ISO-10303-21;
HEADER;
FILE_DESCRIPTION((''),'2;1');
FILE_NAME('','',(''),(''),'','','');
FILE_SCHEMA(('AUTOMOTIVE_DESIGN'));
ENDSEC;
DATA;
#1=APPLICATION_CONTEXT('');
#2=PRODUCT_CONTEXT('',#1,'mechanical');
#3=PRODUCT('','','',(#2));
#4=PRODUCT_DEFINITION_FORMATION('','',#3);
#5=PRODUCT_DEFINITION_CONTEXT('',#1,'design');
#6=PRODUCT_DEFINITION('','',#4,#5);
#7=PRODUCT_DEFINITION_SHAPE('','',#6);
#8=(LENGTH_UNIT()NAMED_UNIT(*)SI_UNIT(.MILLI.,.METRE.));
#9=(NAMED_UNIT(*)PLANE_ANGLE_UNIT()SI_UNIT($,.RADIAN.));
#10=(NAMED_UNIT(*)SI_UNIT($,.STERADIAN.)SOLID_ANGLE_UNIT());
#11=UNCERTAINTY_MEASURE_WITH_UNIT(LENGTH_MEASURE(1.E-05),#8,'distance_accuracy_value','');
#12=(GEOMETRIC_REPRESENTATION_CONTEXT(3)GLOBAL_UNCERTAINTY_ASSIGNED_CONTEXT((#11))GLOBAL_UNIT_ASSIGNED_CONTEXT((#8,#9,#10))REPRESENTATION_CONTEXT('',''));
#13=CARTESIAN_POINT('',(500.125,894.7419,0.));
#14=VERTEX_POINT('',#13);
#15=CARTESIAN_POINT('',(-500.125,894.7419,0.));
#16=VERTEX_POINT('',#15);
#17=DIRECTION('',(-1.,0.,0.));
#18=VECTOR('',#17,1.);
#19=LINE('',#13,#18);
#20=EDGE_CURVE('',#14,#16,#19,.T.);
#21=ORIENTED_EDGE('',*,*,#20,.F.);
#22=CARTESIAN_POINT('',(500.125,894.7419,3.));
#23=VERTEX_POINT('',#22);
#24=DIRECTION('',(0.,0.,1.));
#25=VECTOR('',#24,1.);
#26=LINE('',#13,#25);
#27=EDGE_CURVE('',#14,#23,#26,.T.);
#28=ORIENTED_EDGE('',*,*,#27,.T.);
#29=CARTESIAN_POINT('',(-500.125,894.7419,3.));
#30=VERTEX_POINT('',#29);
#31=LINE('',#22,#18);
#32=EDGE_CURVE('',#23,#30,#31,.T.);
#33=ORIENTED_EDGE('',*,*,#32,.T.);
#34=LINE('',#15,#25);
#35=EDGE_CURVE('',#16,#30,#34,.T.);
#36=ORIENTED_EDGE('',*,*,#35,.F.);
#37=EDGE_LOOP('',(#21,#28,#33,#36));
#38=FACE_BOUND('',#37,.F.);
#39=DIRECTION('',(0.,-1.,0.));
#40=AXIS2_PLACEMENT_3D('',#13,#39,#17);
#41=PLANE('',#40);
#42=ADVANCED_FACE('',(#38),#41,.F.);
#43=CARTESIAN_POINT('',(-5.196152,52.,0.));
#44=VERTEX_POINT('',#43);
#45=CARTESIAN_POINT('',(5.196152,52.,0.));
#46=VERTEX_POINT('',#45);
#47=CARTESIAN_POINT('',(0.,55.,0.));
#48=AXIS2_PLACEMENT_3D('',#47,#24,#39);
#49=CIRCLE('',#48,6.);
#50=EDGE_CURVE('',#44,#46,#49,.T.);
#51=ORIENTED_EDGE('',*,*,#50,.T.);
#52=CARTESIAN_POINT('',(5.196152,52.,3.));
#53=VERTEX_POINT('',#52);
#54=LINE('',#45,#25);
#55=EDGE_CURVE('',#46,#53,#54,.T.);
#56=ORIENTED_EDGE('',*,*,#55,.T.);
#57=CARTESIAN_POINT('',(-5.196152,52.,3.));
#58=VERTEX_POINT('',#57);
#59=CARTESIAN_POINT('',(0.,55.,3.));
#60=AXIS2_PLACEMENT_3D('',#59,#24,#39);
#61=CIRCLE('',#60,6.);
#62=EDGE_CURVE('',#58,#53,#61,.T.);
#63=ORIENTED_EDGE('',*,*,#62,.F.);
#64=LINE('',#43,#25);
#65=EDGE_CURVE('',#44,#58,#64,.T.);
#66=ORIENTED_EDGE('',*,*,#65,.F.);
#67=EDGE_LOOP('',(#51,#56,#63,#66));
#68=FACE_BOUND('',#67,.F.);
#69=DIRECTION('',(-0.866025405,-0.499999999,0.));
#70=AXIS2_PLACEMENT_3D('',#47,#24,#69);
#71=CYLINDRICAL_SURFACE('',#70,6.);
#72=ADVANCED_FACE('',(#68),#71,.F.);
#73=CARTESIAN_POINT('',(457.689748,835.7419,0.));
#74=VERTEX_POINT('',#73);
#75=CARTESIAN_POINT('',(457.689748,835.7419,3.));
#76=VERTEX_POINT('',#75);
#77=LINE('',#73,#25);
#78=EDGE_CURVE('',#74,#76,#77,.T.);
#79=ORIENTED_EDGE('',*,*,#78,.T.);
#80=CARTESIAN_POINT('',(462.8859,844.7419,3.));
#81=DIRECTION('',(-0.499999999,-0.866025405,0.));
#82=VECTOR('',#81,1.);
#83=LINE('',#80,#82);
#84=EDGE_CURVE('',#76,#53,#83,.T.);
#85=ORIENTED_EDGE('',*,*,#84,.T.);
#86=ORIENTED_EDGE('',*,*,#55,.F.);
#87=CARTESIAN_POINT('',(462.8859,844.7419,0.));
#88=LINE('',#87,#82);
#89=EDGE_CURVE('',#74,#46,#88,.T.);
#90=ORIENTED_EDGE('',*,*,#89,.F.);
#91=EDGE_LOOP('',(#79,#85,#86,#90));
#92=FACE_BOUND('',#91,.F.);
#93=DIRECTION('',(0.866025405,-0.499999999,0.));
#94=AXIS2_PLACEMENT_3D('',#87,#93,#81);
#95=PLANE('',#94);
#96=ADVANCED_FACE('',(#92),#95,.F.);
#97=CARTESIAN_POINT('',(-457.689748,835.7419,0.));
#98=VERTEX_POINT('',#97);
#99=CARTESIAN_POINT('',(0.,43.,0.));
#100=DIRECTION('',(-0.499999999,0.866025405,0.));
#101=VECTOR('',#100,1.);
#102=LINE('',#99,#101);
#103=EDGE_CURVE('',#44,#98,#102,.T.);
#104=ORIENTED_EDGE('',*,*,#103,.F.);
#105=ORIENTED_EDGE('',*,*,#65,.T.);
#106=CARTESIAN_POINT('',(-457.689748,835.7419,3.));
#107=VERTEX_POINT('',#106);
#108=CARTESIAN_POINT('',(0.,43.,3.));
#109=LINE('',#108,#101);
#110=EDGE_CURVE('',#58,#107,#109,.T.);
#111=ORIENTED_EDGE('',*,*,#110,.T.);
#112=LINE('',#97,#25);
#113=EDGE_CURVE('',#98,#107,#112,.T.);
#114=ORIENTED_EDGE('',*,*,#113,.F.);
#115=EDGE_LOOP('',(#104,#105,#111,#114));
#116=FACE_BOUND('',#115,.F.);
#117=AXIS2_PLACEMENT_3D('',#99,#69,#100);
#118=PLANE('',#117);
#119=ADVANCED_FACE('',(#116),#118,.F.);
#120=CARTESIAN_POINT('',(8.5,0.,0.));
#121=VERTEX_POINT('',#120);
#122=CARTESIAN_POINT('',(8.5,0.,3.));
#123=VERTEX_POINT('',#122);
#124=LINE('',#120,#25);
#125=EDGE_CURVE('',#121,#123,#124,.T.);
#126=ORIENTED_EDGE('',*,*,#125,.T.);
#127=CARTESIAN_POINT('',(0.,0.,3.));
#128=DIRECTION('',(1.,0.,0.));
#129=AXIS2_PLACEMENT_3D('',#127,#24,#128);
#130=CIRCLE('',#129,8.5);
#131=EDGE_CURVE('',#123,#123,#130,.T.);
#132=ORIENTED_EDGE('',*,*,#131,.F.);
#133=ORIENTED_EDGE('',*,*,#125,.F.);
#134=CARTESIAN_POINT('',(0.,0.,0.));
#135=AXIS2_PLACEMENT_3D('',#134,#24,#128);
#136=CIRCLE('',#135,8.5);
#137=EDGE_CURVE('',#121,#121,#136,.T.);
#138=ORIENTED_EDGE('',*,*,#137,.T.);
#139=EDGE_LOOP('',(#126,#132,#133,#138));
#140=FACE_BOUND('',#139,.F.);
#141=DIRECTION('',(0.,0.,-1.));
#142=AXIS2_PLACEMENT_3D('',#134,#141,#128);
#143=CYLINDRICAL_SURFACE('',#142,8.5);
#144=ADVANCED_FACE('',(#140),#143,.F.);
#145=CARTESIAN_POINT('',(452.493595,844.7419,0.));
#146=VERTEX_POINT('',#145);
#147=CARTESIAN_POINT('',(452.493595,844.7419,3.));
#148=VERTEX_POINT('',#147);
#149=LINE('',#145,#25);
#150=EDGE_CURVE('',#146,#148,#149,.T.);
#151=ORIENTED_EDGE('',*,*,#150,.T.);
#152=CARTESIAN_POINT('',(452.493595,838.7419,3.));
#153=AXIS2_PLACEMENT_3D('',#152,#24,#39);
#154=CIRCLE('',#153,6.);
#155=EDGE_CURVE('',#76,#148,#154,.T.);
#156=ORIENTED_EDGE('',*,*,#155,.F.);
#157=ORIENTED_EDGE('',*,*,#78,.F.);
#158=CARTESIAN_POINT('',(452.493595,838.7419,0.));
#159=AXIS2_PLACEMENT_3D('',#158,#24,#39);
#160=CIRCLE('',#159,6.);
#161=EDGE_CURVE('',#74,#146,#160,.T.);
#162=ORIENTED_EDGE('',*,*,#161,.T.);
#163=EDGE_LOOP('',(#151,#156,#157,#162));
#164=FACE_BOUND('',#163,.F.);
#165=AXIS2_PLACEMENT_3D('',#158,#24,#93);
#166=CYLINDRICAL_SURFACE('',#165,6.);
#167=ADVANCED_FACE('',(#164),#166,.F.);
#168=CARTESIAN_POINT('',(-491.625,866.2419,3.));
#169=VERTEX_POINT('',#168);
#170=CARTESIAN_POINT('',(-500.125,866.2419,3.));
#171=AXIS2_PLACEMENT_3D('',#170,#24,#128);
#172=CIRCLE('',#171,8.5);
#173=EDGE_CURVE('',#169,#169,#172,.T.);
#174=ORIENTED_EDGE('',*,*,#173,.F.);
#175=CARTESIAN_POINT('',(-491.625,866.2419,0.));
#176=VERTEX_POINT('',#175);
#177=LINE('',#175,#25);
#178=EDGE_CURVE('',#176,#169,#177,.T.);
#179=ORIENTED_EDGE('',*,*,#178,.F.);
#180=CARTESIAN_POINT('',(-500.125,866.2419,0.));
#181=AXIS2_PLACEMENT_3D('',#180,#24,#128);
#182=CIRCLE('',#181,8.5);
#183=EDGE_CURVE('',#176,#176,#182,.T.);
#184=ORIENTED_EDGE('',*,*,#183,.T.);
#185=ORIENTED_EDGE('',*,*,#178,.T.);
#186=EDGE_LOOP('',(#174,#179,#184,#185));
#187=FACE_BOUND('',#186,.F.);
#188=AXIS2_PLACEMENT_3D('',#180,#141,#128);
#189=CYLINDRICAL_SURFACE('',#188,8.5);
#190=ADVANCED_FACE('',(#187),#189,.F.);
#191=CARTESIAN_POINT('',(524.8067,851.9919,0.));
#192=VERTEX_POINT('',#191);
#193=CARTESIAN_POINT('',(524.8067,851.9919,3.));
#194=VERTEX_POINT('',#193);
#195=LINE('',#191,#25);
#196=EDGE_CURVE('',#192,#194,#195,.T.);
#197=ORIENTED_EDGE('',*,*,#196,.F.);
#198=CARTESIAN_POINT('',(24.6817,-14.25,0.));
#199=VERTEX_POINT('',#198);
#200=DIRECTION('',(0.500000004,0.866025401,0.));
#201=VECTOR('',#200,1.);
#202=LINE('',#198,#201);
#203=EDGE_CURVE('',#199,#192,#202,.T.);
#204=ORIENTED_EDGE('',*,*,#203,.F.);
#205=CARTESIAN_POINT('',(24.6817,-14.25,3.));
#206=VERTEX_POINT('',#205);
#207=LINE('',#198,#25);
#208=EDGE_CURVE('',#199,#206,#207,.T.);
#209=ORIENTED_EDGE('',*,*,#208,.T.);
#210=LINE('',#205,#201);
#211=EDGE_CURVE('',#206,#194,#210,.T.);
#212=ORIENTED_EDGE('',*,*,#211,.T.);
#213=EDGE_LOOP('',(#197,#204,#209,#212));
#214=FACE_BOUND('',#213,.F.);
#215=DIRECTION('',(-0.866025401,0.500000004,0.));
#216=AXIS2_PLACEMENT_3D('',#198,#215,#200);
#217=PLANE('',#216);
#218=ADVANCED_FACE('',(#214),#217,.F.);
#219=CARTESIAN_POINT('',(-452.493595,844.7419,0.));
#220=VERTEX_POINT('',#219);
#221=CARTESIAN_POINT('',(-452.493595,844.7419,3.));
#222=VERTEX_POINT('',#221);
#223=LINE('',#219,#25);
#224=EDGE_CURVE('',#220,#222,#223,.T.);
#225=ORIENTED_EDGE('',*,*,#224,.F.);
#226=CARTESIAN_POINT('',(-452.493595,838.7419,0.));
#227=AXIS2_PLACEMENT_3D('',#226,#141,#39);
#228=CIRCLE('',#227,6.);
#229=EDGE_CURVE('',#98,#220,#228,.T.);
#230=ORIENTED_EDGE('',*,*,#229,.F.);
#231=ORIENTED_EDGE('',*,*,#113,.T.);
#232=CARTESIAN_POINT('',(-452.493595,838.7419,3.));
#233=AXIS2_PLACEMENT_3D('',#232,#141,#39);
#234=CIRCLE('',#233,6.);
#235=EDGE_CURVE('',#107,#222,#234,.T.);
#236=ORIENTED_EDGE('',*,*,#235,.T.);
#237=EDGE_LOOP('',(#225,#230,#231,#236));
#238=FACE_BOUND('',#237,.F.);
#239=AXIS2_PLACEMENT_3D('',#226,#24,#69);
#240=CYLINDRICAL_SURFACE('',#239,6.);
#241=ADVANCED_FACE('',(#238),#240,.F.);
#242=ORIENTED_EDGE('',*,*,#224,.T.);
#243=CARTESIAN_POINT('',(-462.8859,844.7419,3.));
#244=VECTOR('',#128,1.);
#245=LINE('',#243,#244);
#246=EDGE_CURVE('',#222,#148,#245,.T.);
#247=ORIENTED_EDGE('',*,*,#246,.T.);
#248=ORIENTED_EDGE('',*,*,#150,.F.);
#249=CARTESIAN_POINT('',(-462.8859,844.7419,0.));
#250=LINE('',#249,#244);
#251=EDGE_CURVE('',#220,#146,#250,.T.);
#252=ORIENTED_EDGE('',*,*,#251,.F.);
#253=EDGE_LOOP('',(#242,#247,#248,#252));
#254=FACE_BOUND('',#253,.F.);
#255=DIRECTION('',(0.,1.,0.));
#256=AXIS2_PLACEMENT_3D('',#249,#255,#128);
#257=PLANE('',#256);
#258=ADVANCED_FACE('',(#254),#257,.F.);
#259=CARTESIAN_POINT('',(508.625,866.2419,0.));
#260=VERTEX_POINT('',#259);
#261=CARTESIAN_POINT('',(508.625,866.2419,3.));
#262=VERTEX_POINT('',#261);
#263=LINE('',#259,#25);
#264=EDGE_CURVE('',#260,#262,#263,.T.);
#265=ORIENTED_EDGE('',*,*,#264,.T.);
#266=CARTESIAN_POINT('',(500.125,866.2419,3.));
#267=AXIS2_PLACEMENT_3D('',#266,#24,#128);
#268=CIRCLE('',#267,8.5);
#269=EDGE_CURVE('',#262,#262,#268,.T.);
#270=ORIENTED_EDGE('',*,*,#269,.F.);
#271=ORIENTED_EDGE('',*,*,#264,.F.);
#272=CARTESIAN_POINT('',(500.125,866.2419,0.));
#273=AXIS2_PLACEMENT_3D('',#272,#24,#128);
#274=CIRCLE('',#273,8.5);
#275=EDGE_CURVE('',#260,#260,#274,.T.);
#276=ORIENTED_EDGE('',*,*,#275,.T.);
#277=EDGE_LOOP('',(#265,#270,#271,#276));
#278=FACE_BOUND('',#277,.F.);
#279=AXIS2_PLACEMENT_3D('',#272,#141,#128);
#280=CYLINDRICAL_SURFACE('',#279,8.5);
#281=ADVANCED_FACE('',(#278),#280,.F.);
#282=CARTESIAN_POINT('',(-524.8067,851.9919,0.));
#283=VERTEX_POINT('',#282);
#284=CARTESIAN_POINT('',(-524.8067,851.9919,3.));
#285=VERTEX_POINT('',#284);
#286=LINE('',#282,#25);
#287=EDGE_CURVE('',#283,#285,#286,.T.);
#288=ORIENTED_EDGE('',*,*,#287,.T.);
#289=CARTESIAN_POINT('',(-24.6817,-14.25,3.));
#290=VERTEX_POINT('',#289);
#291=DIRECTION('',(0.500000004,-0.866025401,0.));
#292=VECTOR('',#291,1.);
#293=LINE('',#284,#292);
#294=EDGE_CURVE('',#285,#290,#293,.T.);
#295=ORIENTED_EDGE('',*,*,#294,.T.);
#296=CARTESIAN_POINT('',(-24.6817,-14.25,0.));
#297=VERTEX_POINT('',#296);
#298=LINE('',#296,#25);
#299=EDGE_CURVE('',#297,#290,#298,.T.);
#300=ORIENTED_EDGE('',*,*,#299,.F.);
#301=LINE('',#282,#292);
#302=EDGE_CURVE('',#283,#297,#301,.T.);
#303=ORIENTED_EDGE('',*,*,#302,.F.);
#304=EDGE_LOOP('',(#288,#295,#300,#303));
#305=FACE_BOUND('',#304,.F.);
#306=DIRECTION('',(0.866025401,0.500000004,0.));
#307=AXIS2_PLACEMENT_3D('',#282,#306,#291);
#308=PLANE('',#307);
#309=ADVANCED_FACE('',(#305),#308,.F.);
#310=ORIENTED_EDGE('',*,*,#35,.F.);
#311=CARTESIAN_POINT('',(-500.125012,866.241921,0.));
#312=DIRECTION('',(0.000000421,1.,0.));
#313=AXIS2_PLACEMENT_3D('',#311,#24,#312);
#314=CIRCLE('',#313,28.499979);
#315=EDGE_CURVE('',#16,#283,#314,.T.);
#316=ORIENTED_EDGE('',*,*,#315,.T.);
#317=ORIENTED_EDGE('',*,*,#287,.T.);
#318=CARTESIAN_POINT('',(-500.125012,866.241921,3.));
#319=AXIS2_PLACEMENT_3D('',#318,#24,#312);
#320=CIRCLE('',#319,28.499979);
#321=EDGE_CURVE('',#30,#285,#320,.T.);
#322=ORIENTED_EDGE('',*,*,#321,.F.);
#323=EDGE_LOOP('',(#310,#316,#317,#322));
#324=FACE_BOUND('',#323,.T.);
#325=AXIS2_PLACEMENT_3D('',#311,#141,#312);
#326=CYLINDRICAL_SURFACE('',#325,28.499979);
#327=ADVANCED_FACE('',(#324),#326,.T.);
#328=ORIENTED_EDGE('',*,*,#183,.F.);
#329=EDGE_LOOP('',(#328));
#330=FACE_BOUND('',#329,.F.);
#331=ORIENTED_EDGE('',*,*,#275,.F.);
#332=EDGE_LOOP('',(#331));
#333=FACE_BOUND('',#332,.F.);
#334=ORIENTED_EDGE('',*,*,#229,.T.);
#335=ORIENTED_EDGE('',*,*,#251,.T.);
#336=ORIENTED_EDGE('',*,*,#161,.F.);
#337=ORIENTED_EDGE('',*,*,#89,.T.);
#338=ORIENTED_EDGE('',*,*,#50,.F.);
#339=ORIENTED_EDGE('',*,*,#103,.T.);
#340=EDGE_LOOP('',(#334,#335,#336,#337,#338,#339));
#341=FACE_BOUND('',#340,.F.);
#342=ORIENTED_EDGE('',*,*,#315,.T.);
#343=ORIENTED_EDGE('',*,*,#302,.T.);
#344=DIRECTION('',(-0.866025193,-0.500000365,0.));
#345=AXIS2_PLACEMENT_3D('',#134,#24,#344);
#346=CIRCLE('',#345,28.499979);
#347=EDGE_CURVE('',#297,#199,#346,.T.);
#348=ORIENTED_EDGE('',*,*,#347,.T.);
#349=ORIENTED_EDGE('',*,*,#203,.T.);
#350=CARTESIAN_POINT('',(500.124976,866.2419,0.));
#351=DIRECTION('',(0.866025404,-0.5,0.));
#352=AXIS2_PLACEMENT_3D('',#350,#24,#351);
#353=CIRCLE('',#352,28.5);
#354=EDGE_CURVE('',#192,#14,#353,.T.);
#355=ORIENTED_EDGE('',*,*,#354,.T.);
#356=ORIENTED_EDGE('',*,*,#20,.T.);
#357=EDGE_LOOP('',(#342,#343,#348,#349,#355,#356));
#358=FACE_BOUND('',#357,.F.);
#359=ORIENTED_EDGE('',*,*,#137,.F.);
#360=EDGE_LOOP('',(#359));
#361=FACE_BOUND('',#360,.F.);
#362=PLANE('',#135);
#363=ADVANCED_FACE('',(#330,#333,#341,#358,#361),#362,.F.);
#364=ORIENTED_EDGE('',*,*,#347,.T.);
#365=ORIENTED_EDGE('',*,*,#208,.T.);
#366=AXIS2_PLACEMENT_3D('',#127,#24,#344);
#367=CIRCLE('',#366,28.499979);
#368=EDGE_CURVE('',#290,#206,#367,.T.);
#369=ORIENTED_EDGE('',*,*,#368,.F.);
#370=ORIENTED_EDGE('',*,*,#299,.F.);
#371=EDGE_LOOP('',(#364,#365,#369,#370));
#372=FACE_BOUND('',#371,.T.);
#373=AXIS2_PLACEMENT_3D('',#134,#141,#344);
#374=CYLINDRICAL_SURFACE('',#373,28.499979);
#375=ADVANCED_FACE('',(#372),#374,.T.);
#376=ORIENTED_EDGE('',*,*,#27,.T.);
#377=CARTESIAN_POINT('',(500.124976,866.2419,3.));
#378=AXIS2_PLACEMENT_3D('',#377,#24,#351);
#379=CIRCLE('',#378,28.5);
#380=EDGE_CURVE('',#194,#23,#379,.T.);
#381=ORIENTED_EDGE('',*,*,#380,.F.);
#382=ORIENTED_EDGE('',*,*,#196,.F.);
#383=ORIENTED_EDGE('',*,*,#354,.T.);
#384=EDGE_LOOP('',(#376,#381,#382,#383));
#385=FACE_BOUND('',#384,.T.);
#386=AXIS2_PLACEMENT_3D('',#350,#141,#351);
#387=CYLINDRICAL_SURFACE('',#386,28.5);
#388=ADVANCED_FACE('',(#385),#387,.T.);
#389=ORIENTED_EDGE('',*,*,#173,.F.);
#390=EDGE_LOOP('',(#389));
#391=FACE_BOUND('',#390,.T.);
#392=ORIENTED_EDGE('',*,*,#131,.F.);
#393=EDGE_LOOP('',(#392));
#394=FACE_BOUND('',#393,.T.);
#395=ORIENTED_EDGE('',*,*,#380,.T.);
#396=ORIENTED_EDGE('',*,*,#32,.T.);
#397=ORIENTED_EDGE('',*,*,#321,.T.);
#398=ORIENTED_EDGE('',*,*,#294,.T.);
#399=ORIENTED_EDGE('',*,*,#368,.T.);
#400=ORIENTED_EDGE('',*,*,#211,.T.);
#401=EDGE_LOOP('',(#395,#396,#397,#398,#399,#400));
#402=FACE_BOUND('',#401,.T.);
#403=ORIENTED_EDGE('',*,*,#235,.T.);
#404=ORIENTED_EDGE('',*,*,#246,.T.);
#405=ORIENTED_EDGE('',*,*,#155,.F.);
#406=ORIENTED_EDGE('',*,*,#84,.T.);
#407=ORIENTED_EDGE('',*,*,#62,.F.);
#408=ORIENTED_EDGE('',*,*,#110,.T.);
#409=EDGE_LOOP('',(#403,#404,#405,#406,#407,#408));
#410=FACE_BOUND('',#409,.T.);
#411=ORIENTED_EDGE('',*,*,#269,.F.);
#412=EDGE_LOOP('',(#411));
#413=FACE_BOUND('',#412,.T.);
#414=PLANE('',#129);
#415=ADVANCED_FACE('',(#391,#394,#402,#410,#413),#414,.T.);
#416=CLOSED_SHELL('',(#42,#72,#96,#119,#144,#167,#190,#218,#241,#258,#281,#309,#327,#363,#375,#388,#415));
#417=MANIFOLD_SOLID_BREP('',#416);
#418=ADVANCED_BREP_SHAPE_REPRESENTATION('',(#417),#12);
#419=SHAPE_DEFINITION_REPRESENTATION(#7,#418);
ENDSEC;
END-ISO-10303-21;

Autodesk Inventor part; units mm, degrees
ref_plane "YZ Plane" through (0, 0, 0) normal (1, 0, 0) x (0, 1, 0)
ref_plane "XZ Plane" through (0, 0, 0) normal (0, 1, 0) x (-1, 0, 0)
ref_plane "XY Plane" through (0, 0, 0) normal (0, 0, 1) x (1, 0, 0)
sketch "Sketch1" plane through (0, 0, 0) normal (0, 0, 1) x (1, 0, 0)
  circle A0 centre (0, 0) radius 8.5
  line L0 (-524.8067, 851.9919) -> (-24.6817, -14.25)
  arc A1 (-24.6817, -14.25) -> (24.6817, -14.25) centre (0, 0) ccw
  line L1 (24.6817, -14.25) -> (524.8067, 851.9919)
  arc A2 (524.8067, 851.9919) -> (500.125, 894.7419) centre (500.125, 866.2419) ccw
  line L2 (500.125, 894.7419) -> (-500.125, 894.7419)
  arc A3 (-500.125, 894.7419) -> (-524.8067, 851.9919) centre (-500.125, 866.2419) ccw
  line L3 (0, 0) -> (0, 894.7419) construction
  line L4 (-462.8859, 844.7419) -> (462.8859, 844.7419)
  line L5 (462.8859, 844.7419) -> (0, 43)
  line L6 (0, 43) -> (-462.8859, 844.7419)
  circle A4 centre (-500.125, 866.2419) radius 8.5
  circle A5 centre (500.125, 866.2419) radius 8.5
  dimension "d34" = 17
  dimension "d35" = 20
  dimension "d36" = 1000.25
  dimension "d37" = 1000.25
  dimension "d38" = 50
  dimension "d39" = 17
  dimension "d40" = 17
extrude "Plate1" add sketch "Sketch1" along normal blind 3
fillet "Corner Round3" radius 6 3 edges at (-462.8859, 844.7419, 1.5) (0, 43, 1.5) (462.8859, 844.7419, 1.5)
equation "\"d37\" = d36"
equation "\"d2\" = Thickness"
equation "\"BendReliefWidth\" = Thickness"
equation "\"BendReliefDepth\" = 0.5 * Thickness"
equation "\"CornerReliefSize\" = 4 * Thickness"
equation "\"MinimumRemnant\" = 2 * Thickness"
equation "\"TransitionRadius\" = BendRadius"
equation "\"JacobiRadiusSize\" = BendRadius"
equation "\"GapSize\" = Thickness"
equation "\"Thickness\" = 3"
equation "\"BendRadius\" = 5"
properties part number "PNS 1788 leg 1200 pattern" material "Stainless Steel"
